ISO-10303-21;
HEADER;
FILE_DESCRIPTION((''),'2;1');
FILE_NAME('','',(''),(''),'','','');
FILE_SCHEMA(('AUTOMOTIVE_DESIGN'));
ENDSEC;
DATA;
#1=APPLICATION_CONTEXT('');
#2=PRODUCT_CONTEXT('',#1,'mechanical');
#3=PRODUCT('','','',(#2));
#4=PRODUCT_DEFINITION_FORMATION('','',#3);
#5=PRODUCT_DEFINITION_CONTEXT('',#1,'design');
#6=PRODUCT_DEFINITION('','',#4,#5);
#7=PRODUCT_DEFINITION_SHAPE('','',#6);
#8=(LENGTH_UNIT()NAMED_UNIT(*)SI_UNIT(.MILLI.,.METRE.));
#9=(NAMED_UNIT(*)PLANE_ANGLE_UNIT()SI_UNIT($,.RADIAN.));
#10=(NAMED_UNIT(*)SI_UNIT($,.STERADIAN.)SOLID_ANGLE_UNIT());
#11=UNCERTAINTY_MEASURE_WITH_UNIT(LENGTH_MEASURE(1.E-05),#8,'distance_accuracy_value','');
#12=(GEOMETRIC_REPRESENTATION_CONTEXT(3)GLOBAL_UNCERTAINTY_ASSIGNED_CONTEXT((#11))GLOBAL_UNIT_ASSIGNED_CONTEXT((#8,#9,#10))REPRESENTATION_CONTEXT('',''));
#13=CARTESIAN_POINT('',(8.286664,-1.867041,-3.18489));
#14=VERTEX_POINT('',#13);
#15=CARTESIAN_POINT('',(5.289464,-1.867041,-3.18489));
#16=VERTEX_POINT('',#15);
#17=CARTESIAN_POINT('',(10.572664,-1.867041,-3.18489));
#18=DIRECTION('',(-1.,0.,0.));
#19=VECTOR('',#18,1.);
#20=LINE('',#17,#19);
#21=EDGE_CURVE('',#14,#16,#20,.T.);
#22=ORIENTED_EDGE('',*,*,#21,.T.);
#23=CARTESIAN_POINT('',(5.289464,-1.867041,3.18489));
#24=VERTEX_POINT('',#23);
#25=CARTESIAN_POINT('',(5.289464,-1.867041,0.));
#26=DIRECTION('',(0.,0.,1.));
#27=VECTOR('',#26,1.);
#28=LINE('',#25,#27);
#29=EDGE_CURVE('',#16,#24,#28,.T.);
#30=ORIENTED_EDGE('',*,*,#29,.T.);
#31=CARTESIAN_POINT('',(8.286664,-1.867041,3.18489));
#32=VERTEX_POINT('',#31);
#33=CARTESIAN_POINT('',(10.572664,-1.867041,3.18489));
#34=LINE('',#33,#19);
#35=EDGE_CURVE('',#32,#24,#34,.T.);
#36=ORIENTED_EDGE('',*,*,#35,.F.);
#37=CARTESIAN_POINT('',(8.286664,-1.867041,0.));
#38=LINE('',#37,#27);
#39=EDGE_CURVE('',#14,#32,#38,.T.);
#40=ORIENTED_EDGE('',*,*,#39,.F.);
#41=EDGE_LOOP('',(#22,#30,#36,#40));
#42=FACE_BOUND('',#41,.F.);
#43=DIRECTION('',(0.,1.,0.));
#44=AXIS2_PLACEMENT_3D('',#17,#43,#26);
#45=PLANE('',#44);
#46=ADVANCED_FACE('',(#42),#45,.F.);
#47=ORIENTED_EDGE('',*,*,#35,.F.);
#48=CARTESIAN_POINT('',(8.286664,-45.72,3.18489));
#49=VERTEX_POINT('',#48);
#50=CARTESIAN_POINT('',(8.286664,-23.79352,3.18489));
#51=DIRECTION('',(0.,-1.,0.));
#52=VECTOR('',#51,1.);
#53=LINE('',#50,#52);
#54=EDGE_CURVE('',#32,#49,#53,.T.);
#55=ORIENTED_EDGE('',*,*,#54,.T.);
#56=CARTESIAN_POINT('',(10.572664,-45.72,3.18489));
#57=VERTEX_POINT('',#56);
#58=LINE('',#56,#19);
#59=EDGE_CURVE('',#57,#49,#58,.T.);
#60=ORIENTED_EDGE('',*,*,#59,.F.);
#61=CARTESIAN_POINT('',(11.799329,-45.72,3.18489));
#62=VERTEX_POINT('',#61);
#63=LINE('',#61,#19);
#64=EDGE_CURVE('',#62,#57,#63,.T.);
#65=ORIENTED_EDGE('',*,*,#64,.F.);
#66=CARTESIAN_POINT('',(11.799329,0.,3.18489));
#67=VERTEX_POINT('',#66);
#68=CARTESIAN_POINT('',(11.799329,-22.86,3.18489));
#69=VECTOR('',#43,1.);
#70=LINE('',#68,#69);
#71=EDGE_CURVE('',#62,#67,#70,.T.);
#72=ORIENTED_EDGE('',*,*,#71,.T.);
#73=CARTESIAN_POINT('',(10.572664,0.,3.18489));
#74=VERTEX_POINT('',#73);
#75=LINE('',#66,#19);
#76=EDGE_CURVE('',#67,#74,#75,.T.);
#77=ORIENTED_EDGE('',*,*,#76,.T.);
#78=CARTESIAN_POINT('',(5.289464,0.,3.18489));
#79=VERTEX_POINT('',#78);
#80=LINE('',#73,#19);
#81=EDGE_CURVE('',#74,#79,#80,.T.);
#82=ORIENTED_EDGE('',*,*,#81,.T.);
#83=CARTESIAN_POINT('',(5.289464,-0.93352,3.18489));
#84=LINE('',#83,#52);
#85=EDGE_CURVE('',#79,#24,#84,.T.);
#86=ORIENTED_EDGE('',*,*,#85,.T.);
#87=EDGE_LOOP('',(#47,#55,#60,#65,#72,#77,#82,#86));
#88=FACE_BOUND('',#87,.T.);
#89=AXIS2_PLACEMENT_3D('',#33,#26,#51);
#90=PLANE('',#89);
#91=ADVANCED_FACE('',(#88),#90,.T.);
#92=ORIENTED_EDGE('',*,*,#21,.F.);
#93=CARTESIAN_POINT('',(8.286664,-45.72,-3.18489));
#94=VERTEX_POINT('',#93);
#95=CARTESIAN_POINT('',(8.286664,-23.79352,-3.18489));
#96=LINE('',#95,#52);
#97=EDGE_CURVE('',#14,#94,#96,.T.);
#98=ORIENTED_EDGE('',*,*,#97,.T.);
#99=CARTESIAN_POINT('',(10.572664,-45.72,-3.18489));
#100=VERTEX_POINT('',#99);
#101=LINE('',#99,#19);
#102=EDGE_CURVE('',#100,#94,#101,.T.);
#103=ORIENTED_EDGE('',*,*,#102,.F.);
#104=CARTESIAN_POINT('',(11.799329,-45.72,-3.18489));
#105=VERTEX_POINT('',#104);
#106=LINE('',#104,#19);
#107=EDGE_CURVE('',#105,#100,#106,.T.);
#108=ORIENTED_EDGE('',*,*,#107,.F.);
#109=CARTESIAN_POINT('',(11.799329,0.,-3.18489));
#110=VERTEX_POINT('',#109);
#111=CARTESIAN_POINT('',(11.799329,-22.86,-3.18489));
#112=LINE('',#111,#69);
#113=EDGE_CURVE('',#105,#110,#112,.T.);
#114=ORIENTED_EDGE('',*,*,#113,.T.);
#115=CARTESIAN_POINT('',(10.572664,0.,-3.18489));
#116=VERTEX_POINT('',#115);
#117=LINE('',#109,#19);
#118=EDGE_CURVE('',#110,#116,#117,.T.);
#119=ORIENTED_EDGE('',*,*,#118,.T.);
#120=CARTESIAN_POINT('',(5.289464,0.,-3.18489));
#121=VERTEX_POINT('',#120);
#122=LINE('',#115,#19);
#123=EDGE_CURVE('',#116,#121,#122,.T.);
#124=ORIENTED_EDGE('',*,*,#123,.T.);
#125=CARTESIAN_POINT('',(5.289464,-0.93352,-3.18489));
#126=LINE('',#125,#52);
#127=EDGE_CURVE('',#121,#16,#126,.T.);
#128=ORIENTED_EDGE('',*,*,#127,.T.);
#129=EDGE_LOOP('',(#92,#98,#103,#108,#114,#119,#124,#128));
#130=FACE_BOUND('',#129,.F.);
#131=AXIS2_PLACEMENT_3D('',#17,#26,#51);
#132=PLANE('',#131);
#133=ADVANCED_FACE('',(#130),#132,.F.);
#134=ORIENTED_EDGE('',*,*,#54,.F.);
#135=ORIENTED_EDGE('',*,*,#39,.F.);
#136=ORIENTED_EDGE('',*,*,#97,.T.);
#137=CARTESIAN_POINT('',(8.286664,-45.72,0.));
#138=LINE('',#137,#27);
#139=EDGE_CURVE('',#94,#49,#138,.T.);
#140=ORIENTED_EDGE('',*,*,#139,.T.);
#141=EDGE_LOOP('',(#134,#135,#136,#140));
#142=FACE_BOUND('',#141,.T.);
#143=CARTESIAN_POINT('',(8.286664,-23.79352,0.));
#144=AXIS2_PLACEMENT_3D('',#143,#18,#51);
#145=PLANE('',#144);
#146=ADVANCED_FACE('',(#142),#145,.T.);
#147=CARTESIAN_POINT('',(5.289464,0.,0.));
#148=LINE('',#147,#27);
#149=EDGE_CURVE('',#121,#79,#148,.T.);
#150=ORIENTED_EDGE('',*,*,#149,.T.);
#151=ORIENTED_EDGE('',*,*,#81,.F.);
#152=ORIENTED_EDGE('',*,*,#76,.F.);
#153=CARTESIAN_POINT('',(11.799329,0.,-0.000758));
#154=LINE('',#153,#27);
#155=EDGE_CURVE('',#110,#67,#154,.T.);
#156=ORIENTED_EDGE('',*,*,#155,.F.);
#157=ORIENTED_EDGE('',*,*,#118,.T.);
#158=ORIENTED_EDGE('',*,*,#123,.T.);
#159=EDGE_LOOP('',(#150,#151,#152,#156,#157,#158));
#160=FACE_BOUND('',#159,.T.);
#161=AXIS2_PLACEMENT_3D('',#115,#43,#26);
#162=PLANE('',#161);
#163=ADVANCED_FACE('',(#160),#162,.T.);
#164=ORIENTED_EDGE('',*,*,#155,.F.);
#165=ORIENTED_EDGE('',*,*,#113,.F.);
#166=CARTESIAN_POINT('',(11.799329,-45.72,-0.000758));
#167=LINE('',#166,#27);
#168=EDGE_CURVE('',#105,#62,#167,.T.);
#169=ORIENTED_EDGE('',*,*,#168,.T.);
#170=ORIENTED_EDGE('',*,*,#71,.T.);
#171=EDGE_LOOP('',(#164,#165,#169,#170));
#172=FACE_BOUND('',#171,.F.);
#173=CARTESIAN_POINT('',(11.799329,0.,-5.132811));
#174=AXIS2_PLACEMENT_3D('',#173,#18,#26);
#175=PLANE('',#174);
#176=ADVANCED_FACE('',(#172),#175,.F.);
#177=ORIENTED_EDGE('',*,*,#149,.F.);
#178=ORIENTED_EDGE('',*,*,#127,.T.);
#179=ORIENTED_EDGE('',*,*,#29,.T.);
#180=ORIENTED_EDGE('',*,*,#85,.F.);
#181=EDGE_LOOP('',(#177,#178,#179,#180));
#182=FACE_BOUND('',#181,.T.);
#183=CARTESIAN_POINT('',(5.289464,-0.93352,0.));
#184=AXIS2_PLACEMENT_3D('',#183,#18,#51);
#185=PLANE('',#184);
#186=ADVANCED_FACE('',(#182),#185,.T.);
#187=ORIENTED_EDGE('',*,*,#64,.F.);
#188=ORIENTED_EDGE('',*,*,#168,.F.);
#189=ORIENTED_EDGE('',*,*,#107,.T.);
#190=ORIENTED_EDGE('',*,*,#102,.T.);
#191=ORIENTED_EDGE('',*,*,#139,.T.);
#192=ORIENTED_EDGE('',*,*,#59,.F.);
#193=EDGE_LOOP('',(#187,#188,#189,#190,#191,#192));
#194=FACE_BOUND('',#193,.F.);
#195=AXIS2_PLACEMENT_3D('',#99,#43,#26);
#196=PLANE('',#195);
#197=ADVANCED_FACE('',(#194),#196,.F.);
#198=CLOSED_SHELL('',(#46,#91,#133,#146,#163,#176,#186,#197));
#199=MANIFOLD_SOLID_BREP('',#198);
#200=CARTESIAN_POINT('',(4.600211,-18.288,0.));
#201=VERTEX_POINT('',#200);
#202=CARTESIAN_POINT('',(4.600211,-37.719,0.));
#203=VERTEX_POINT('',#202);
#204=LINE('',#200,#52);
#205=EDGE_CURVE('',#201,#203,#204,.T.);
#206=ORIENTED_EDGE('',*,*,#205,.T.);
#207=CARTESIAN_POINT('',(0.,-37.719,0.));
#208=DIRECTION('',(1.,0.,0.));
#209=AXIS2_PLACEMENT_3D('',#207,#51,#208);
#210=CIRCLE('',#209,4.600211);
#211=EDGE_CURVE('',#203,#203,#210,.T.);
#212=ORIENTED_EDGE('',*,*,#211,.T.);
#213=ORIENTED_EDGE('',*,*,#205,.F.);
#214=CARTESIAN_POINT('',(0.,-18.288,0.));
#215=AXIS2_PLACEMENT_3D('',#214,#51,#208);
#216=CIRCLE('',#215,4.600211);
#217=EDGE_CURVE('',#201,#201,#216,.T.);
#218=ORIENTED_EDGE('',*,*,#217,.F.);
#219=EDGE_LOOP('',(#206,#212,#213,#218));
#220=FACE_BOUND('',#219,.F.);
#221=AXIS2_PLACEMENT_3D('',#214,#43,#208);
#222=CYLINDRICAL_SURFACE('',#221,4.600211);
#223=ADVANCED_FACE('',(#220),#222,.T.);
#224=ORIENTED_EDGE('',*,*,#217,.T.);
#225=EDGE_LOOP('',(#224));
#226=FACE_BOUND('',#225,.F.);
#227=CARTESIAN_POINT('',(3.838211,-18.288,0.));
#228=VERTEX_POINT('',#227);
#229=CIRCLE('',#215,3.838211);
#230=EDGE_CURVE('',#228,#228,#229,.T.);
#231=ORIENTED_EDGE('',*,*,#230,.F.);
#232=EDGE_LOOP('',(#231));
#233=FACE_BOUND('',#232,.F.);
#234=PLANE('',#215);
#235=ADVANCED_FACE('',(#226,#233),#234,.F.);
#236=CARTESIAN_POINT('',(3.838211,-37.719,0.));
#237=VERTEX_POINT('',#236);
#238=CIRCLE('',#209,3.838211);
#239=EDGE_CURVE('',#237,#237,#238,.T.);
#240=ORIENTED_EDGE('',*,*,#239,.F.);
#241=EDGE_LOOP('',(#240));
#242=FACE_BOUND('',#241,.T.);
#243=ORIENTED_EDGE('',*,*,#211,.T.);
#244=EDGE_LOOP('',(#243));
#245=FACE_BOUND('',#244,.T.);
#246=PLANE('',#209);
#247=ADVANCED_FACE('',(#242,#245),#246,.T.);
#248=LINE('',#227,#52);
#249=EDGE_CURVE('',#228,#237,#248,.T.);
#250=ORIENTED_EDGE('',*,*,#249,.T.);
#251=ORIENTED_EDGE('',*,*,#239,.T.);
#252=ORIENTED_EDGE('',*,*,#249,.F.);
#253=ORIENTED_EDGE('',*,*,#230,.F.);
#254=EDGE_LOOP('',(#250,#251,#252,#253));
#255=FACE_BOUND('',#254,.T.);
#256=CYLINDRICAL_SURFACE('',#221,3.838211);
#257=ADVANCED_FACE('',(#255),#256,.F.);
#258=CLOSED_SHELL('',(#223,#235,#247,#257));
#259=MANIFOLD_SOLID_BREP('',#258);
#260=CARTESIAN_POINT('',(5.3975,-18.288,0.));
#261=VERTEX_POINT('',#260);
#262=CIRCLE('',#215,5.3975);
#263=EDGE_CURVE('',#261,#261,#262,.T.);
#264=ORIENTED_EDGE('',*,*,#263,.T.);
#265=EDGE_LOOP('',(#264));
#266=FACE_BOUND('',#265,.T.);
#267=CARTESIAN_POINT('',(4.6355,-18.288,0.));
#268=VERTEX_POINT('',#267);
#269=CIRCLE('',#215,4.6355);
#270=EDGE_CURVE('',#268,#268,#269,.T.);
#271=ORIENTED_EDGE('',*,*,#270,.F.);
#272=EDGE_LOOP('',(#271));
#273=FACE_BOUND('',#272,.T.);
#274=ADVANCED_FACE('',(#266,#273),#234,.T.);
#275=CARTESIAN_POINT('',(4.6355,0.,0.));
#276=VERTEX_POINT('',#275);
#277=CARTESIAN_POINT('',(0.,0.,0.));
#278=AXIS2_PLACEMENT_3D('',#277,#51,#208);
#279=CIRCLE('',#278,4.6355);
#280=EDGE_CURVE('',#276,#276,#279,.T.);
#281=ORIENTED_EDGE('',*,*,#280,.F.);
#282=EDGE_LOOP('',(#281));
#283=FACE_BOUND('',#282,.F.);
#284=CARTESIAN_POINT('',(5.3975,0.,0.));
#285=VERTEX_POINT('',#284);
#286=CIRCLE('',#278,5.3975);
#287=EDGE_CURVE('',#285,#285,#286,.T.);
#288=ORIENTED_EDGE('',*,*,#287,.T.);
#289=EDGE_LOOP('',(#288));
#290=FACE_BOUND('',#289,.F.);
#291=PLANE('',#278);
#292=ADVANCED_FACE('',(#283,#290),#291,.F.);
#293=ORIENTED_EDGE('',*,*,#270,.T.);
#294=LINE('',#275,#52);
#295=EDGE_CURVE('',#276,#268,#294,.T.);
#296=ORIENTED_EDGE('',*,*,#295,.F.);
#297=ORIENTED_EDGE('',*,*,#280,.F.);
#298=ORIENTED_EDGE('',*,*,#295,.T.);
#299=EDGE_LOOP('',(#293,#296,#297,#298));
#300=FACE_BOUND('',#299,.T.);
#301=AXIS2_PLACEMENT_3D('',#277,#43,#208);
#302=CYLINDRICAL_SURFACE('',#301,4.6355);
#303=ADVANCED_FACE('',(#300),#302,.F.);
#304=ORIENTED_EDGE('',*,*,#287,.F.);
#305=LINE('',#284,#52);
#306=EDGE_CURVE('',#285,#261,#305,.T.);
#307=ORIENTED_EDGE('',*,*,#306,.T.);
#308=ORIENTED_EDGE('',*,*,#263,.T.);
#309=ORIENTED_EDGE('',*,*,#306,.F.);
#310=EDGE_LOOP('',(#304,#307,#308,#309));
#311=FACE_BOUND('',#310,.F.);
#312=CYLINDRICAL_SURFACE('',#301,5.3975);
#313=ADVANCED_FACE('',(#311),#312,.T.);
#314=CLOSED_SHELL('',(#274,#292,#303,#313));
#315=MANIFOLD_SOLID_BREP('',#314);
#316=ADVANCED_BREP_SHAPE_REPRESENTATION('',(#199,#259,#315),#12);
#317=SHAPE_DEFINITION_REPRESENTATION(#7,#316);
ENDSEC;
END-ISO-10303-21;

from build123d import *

# Parameters (mm, degrees)
F0_R      = 5.3975
F1_DEPTH  = 18.288
F2_T      = -0.762
F3_R      = 4.600211285
F4_DEPTH  = 19.431
F5_T      = -0.762
F6_W      = 4.6940159253
F6_H      = 10.2641077222
F7_DEPTH  = 45.72
F8_W      = 3.4673514045
F8_H      = 45.72
F9_DEPTH  = 25.4
F10_W     = 45.72
F10_H     = 1.9464063645
F10_H_2   = 1.9479215399
F11_DEPTH = 25.4
F12_W     = 1.8670405261
F12_H     = 6.3697798178
F13_DEPTH = 5.2832
F14_W     = 43.8529594739
F14_H     = 6.3697798178
F15_DEPTH = 2.286


with BuildPart() as f1:
    # F0 (on Front) → F1 (new body)
    with BuildSketch(Plane.XZ):
        Circle(F0_R)
    extrude(amount=F1_DEPTH)

    # F2
    f2_openings = [f1.faces().sort_by_distance(p)[0] for p in [
        (0, 0, 0),
        (0, -18.288, 0),
    ]]
    offset(amount=F2_T, openings=f2_openings)


with BuildPart() as f4:
    # F3 (on face) → F4 (new body)
    with BuildSketch(Plane.XZ.offset(18.288)):
        Circle(F3_R)
    extrude(amount=F4_DEPTH)

    # F5
    f5_openings = [f4.faces().sort_by_distance(p)[0] for p in [
        (0, -37.719, 0),
        (0, -18.288, 0),
    ]]
    offset(amount=F5_T, openings=f5_openings)


with BuildPart() as f7:
    # F6 (on face) → F7 (new body)
    with BuildSketch(Plane(origin=(0, 0, 0), x_dir=(-1, 0, 0), z_dir=(0, 1, 0))):
        with Locations((-9.4523209978, -0.0007575877)):
            Rectangle(F6_W, F6_H)
    extrude(amount=-F7_DEPTH)

    # F8 (on face) → F9 (cut)
    with BuildSketch(Plane(origin=(0, 0, -5.1328114488), x_dir=(1, 0, 0), z_dir=(0, 0, -1))):
        with Locations((8.8389887374, 22.86)):
            Rectangle(F8_W, F8_H)
    extrude(amount=-F9_DEPTH, mode=Mode.SUBTRACT)

    # F10 (on face) → F11 (cut)
    with BuildSketch(Plane.YZ.offset(11.7993289605)):
        with Locations((-22.86, 4.1580930911)):
            Rectangle(F10_W, F10_H)
        with Locations((-22.86, -4.1588506788)):
            Rectangle(F10_W, F10_H_2)
    extrude(amount=-F11_DEPTH, mode=Mode.SUBTRACT)

    # F12 (on face) → F13 (join)
    with BuildSketch(Plane(origin=(10.5726644397, 0, 0), x_dir=(0, -1, 0), z_dir=(-1, 0, 0))):
        with Locations((0.9335202631, 0)):
            Rectangle(F12_W, F12_H)
    extrude(amount=F13_DEPTH)

    # F14 (on face) → F15 (join)
    with BuildSketch(Plane(origin=(10.5726644397, 0, 0), x_dir=(0, -1, 0), z_dir=(-1, 0, 0))):
        with Locations((23.7935202631, 0)):
            Rectangle(F14_W, F14_H)
    extrude(amount=F15_DEPTH)


solid = Compound([f1.part, f4.part, f7.part])
